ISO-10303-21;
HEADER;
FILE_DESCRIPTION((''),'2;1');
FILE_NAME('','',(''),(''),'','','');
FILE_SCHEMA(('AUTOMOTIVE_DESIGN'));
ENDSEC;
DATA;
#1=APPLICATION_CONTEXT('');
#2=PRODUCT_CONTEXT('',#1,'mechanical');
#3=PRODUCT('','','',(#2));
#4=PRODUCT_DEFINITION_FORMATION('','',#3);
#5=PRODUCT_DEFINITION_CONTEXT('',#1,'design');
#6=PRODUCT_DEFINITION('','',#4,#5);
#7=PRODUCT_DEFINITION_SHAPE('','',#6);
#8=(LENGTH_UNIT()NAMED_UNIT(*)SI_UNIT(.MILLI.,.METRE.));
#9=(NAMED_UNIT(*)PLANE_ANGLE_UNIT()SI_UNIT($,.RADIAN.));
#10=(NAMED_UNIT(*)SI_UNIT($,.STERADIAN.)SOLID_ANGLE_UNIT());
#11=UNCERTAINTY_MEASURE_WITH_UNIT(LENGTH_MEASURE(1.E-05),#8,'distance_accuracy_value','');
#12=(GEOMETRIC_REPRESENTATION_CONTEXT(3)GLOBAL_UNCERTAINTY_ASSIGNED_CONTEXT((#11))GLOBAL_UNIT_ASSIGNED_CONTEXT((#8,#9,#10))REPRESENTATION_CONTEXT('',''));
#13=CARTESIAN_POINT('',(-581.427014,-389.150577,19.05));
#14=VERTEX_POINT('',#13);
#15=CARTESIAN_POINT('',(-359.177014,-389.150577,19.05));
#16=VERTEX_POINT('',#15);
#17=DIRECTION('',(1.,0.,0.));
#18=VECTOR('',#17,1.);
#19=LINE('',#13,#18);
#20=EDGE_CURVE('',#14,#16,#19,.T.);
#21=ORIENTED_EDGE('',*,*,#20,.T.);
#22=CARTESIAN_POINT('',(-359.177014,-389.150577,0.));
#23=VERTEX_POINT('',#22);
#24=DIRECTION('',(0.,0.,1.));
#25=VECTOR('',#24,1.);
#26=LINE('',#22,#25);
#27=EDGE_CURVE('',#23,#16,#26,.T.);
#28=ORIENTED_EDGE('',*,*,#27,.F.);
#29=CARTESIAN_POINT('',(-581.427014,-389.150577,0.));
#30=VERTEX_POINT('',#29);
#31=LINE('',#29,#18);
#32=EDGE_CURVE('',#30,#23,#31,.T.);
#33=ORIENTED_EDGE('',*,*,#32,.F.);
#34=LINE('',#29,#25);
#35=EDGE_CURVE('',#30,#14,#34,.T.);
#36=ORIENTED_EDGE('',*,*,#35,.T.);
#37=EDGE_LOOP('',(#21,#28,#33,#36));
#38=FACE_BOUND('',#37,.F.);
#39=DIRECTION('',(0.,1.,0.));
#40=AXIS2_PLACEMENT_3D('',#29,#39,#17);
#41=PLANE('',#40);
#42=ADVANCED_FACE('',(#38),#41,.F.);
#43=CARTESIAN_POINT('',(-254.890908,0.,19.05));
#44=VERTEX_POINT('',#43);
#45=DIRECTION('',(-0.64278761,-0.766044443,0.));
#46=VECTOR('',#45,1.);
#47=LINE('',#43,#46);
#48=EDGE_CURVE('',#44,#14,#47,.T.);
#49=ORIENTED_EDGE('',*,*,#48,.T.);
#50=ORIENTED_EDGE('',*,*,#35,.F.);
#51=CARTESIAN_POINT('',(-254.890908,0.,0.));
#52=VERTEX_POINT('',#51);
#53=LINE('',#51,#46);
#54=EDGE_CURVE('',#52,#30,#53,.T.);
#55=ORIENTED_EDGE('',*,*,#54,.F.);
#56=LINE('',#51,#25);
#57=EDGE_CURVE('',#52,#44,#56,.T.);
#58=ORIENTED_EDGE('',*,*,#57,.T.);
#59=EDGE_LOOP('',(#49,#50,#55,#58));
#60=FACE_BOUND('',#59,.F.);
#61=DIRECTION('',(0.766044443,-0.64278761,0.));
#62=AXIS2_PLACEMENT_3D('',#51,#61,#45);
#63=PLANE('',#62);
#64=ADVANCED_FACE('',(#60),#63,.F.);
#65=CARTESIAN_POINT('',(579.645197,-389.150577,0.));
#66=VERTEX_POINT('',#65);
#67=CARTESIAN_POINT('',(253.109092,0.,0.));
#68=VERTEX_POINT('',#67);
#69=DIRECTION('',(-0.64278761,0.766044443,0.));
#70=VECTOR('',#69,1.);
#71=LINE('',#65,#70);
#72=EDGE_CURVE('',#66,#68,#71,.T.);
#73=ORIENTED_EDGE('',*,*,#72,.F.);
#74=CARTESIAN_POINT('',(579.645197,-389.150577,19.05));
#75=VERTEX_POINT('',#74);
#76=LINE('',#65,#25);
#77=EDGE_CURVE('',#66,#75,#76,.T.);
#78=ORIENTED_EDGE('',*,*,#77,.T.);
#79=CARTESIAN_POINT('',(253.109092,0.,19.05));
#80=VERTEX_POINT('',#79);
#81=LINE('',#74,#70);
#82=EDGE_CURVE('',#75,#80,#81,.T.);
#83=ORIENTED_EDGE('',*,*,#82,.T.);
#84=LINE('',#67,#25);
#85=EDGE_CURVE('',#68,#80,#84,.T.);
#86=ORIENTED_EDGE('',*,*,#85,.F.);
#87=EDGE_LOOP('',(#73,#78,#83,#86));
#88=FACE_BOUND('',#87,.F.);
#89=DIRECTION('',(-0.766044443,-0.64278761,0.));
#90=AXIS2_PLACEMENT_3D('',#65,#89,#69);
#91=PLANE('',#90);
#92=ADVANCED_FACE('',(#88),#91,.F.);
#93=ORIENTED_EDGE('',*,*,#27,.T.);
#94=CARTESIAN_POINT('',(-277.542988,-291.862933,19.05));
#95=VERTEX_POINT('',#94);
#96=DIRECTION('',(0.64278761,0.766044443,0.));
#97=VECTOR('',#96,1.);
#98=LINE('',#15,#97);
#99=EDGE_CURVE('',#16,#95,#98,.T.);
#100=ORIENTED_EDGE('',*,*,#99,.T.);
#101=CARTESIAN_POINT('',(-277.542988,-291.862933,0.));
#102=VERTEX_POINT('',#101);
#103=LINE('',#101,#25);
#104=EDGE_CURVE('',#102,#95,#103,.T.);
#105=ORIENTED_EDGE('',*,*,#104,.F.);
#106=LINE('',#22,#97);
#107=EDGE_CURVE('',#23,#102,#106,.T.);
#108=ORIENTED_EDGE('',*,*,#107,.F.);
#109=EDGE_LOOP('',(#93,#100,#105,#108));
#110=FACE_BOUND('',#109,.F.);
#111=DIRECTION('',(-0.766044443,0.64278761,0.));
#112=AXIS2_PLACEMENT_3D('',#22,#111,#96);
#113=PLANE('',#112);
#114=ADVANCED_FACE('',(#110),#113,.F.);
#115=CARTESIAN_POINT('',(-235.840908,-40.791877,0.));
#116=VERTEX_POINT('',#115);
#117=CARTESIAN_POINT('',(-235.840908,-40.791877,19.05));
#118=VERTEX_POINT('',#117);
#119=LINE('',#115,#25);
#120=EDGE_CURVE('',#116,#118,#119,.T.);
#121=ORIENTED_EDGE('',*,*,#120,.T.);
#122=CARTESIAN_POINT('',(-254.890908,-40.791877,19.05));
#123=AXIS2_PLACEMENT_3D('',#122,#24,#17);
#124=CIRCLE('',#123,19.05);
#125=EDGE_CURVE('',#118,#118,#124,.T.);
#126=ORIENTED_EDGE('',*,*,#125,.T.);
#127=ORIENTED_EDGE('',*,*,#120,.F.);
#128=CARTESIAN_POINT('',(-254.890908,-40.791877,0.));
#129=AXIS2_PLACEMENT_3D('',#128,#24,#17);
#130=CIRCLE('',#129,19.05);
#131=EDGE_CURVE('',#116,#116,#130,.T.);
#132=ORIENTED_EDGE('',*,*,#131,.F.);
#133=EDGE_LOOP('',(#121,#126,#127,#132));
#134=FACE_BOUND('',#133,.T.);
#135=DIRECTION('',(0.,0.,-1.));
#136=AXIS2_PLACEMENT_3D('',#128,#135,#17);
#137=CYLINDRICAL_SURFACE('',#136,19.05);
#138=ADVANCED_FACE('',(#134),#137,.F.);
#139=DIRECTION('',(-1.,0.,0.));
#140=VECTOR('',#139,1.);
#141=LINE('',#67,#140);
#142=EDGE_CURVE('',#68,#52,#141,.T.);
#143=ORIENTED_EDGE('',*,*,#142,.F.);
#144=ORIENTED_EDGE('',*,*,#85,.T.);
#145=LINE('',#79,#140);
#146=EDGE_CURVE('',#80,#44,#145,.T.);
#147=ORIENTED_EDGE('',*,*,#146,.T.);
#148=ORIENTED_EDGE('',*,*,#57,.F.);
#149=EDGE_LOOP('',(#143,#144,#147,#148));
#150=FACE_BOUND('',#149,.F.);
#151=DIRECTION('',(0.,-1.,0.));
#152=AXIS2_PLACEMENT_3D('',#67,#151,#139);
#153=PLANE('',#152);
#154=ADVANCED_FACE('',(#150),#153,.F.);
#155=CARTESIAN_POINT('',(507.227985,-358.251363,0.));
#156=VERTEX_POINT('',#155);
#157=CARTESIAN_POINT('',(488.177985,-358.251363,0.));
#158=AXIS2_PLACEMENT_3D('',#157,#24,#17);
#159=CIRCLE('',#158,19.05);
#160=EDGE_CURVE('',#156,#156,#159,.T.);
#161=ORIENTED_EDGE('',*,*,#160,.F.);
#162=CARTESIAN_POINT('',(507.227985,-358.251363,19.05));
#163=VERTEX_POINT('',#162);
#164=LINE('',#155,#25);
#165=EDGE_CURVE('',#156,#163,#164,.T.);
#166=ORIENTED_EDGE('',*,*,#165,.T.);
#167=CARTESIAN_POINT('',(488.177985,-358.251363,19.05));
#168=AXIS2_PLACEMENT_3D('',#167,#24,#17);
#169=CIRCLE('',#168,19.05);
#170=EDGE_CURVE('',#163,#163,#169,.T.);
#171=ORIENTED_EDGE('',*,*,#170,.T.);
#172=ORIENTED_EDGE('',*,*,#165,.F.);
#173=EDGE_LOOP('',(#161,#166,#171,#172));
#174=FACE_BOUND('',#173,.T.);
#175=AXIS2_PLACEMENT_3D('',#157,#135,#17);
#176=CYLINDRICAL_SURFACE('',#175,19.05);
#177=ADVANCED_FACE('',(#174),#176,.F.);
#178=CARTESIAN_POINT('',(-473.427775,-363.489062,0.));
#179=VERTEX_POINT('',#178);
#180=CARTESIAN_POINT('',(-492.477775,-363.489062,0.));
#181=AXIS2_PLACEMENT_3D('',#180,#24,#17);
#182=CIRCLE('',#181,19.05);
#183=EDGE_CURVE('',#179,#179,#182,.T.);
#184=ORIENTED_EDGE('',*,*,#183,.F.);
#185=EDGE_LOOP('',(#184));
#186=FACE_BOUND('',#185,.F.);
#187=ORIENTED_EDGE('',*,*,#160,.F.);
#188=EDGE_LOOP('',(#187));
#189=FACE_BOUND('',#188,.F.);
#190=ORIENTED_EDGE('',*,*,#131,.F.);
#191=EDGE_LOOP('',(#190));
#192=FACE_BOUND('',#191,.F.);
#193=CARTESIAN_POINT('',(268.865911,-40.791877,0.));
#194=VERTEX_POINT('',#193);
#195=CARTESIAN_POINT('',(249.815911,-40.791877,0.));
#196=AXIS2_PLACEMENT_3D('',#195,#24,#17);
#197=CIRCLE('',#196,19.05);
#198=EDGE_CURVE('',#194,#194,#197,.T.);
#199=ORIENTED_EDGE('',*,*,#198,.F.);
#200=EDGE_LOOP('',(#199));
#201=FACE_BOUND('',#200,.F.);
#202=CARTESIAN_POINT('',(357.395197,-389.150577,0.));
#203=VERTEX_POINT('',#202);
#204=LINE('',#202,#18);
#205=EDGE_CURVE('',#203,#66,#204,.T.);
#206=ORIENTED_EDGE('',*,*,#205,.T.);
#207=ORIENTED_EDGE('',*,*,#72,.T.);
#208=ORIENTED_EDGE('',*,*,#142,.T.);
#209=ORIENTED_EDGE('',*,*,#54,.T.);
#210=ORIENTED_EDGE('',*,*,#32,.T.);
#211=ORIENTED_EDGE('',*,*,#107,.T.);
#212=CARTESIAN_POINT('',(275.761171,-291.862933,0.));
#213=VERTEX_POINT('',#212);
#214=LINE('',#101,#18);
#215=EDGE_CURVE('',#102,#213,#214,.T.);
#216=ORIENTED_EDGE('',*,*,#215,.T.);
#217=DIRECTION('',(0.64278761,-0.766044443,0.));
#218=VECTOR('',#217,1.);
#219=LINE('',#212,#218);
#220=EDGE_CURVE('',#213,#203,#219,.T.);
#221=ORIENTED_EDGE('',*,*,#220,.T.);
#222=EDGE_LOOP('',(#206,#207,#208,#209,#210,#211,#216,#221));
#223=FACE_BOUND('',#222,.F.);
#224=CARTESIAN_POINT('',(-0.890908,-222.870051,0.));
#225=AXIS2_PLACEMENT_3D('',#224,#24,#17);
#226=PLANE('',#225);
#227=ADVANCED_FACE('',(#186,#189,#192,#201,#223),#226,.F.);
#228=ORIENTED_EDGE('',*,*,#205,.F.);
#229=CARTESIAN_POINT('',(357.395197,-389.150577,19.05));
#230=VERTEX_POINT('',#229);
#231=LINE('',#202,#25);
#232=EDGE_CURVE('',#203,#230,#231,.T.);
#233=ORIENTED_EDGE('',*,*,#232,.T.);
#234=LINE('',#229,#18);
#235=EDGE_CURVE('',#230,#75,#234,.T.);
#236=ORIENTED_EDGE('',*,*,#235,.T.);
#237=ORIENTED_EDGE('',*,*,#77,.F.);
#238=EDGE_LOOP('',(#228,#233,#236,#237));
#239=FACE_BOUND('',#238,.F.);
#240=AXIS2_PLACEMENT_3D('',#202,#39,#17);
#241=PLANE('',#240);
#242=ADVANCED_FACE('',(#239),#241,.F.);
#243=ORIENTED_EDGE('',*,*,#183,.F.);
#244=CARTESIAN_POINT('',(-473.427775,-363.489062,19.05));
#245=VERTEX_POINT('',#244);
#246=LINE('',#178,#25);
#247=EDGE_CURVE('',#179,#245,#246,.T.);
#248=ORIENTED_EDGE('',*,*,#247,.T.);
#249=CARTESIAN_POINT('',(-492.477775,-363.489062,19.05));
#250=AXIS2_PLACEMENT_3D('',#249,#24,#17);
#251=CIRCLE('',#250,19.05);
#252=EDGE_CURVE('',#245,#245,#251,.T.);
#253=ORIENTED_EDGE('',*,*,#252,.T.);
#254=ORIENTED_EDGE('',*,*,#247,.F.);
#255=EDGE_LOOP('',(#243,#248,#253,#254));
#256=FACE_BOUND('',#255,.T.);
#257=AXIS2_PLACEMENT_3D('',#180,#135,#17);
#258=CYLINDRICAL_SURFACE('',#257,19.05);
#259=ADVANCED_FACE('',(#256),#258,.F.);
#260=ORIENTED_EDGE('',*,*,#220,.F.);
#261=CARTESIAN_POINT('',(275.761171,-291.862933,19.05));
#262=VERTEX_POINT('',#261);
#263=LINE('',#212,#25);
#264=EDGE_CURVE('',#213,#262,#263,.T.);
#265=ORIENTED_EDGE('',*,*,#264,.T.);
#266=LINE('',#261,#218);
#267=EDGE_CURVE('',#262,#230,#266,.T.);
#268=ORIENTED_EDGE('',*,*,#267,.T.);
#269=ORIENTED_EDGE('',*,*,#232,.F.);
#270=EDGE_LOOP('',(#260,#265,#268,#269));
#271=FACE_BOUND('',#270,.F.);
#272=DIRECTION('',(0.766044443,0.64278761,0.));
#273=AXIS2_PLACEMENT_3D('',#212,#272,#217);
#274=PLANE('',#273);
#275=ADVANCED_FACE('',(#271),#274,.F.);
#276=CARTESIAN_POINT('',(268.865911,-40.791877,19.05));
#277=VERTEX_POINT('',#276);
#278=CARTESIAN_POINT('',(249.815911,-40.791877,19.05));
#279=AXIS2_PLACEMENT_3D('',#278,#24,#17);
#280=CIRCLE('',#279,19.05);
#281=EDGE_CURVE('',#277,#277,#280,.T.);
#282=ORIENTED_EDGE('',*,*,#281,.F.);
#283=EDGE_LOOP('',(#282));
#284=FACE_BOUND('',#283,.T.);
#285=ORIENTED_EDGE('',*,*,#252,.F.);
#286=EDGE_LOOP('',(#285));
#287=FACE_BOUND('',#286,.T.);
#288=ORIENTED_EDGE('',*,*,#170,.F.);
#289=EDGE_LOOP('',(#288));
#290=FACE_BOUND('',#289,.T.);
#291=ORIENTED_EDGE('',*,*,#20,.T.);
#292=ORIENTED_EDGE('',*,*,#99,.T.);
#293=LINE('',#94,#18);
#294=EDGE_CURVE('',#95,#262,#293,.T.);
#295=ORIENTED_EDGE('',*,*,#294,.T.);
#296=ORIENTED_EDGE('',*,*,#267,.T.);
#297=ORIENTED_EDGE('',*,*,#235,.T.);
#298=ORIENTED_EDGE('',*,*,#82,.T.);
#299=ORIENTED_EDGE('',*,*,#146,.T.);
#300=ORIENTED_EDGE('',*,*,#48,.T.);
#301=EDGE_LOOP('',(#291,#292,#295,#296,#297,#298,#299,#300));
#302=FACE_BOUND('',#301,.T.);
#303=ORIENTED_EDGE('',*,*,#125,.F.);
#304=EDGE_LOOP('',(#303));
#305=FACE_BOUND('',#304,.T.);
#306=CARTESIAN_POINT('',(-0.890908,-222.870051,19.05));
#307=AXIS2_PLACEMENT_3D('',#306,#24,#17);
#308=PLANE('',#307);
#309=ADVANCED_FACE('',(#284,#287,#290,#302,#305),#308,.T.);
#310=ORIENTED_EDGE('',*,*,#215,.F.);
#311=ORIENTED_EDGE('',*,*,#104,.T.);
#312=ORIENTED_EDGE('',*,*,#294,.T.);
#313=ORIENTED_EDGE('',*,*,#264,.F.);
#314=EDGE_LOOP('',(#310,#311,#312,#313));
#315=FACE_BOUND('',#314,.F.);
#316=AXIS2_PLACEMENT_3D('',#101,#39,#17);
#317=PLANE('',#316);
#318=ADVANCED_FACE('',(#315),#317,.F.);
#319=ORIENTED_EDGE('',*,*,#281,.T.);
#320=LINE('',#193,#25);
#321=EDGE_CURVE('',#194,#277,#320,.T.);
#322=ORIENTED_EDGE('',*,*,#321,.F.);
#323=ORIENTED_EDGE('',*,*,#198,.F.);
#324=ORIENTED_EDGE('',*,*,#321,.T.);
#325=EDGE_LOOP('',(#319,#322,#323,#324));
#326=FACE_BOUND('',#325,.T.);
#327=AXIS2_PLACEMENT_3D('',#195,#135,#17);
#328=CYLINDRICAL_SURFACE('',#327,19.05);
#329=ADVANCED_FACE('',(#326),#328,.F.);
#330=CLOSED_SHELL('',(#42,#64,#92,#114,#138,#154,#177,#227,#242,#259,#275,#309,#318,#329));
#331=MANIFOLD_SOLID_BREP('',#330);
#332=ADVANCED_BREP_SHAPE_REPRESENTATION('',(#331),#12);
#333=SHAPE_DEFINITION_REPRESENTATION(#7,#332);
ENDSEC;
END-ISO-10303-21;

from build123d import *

# Parameters (mm, degrees)
F0_R     = 19.05
F1_DEPTH = 19.05


# Not quite as in the source:
# - the program builds the solid bodies; features that only make, move or delete a surface that nothing else refers to are left out


with BuildPart() as f1:
    # F0 (on Top) → F1 (new body)
    with BuildSketch(Plane.XY):
        Polygon((579.6451972242, -389.1505771044), (253.1090915034, 0), (-254.8909084966, 0), (-581.4270142173, -389.1505771044), (-359.1770142173, -389.1505771044), (-277.5429877872, -291.8629328283), (275.761170794, -291.8629328283), (357.3951972242, -389.1505771044), align=None)
        with Locations((-492.4777746201, -363.489061594)):
            Circle(F0_R, mode=Mode.SUBTRACT)
        with Locations((488.1779849529, -358.251363039)):
            Circle(F0_R, mode=Mode.SUBTRACT)
        with Locations((-254.8909084966, -40.7918766141)):
            Circle(F0_R, mode=Mode.SUBTRACT)
        with Locations((249.8159110546, -40.7918766141)):
            Circle(F0_R, mode=Mode.SUBTRACT)
    extrude(amount=F1_DEPTH)


solid = f1.part
